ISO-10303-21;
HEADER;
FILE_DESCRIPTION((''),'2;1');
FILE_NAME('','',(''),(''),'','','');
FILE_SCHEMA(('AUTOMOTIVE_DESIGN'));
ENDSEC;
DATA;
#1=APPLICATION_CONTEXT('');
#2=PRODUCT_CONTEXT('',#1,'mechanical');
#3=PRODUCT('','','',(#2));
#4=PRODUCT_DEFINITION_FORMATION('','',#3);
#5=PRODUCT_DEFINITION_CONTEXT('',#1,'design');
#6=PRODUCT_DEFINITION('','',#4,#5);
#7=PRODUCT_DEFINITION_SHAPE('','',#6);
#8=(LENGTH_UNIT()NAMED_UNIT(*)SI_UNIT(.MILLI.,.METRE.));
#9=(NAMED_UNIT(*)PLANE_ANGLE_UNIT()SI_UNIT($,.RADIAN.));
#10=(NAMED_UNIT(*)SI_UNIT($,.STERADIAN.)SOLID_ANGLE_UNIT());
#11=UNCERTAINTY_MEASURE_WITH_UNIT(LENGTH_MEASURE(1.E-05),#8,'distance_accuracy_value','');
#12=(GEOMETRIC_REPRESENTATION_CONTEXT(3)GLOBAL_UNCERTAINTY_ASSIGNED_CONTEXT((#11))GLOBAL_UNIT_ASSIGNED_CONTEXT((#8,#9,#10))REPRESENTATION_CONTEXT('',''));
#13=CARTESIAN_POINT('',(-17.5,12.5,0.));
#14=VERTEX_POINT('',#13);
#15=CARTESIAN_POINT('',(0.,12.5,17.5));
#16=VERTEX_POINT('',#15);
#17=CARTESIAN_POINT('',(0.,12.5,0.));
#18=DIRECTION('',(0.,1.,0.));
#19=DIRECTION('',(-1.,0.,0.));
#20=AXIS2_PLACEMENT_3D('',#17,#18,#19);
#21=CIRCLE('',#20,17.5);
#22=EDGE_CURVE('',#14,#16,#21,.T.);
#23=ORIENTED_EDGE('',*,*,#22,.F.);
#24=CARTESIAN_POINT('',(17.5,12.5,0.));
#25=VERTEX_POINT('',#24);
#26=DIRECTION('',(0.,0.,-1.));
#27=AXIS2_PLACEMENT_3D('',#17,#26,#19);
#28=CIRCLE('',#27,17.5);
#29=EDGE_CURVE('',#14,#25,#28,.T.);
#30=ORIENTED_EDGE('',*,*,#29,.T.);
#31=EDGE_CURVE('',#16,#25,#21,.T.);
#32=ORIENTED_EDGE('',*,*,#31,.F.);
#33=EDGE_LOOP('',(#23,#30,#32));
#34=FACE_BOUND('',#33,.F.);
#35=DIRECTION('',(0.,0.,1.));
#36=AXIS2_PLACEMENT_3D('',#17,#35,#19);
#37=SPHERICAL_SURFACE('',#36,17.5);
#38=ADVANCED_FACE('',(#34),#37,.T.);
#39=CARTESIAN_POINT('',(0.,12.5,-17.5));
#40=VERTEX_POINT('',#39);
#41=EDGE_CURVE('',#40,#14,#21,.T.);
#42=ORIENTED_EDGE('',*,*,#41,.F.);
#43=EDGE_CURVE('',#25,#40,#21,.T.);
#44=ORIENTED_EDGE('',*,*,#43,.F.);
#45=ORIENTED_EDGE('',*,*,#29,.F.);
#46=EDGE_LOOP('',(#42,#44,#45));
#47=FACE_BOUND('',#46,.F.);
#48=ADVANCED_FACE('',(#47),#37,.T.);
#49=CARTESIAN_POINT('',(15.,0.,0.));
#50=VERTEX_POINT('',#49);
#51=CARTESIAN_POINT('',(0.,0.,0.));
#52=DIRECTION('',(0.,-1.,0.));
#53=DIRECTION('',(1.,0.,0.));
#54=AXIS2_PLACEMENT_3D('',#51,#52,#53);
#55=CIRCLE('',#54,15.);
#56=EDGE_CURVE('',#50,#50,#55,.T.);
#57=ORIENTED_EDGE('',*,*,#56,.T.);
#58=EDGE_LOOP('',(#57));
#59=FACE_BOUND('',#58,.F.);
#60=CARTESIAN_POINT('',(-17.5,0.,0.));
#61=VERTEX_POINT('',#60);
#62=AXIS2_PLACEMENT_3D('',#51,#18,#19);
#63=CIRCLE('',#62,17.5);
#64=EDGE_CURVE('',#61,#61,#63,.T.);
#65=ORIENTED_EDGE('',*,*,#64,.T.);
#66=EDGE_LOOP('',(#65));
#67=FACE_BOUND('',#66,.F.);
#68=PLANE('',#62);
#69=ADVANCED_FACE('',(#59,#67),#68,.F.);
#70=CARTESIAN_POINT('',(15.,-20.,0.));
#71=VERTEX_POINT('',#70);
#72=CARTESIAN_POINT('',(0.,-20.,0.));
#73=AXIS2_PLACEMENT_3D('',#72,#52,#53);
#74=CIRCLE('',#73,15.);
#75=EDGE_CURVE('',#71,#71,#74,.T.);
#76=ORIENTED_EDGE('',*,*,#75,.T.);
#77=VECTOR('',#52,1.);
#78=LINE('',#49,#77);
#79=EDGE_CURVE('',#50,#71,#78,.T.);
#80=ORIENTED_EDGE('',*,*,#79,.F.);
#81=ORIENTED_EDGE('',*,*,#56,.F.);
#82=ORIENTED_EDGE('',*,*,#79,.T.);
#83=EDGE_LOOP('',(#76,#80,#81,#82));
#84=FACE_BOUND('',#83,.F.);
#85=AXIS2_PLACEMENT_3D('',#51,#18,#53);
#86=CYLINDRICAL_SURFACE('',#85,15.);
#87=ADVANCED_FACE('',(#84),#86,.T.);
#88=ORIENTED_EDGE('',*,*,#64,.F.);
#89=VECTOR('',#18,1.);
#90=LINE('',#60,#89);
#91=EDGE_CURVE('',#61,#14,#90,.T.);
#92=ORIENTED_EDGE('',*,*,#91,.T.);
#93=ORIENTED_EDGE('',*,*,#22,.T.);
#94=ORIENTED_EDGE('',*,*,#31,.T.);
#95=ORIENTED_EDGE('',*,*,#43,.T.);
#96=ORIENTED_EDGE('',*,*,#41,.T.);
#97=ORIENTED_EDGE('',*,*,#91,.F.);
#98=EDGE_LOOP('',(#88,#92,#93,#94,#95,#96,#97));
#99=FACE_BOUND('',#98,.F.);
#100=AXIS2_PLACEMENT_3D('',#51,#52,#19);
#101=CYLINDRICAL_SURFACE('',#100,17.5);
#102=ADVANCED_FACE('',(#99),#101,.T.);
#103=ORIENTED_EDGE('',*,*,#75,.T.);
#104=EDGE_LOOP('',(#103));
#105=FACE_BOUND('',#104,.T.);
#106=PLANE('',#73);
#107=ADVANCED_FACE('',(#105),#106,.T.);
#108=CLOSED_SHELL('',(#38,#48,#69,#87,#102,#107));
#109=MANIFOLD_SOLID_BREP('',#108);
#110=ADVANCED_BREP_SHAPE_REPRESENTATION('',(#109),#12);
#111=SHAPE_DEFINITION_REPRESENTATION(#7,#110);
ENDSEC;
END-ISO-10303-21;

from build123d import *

# Parameters (mm, degrees)
F0_R     = 15
F1_DEPTH = 20
F2_R     = 17.5
F2_R_2   = 15
F3_DEPTH = 12.5


with BuildPart() as f1:
    # F0 (on Front) → F1 (new body)
    with BuildSketch(Plane.XZ):
        Circle(F0_R)
    extrude(amount=F1_DEPTH)

    # F2 (on face) → F3 (join)
    with BuildSketch(Plane(origin=(0, 0, 0), x_dir=(-1, 0, 0), z_dir=(0, 1, 0))):
        Circle(F2_R)
        Circle(F2_R_2, mode=Mode.SUBTRACT)
        Circle(F2_R_2)
    extrude(amount=F3_DEPTH)

    # F4 (on face) → F5 (revolve)
    with BuildSketch(Plane(origin=(0, 12.5, 0), x_dir=(-1, 0, 0), z_dir=(0, 1, 0))):
        with BuildLine():
            ThreePointArc((17.5, 0), (12.3743686708, 12.3743686708), (0, 17.5))
            Line((0, 17.5), (0, -17.5))
            ThreePointArc((0, -17.5), (12.3743686708, -12.3743686708), (17.5, 0))
        make_face()
    revolve(axis=Axis((0, 12.5, 0), (0, 0, -1)))


solid = f1.part
